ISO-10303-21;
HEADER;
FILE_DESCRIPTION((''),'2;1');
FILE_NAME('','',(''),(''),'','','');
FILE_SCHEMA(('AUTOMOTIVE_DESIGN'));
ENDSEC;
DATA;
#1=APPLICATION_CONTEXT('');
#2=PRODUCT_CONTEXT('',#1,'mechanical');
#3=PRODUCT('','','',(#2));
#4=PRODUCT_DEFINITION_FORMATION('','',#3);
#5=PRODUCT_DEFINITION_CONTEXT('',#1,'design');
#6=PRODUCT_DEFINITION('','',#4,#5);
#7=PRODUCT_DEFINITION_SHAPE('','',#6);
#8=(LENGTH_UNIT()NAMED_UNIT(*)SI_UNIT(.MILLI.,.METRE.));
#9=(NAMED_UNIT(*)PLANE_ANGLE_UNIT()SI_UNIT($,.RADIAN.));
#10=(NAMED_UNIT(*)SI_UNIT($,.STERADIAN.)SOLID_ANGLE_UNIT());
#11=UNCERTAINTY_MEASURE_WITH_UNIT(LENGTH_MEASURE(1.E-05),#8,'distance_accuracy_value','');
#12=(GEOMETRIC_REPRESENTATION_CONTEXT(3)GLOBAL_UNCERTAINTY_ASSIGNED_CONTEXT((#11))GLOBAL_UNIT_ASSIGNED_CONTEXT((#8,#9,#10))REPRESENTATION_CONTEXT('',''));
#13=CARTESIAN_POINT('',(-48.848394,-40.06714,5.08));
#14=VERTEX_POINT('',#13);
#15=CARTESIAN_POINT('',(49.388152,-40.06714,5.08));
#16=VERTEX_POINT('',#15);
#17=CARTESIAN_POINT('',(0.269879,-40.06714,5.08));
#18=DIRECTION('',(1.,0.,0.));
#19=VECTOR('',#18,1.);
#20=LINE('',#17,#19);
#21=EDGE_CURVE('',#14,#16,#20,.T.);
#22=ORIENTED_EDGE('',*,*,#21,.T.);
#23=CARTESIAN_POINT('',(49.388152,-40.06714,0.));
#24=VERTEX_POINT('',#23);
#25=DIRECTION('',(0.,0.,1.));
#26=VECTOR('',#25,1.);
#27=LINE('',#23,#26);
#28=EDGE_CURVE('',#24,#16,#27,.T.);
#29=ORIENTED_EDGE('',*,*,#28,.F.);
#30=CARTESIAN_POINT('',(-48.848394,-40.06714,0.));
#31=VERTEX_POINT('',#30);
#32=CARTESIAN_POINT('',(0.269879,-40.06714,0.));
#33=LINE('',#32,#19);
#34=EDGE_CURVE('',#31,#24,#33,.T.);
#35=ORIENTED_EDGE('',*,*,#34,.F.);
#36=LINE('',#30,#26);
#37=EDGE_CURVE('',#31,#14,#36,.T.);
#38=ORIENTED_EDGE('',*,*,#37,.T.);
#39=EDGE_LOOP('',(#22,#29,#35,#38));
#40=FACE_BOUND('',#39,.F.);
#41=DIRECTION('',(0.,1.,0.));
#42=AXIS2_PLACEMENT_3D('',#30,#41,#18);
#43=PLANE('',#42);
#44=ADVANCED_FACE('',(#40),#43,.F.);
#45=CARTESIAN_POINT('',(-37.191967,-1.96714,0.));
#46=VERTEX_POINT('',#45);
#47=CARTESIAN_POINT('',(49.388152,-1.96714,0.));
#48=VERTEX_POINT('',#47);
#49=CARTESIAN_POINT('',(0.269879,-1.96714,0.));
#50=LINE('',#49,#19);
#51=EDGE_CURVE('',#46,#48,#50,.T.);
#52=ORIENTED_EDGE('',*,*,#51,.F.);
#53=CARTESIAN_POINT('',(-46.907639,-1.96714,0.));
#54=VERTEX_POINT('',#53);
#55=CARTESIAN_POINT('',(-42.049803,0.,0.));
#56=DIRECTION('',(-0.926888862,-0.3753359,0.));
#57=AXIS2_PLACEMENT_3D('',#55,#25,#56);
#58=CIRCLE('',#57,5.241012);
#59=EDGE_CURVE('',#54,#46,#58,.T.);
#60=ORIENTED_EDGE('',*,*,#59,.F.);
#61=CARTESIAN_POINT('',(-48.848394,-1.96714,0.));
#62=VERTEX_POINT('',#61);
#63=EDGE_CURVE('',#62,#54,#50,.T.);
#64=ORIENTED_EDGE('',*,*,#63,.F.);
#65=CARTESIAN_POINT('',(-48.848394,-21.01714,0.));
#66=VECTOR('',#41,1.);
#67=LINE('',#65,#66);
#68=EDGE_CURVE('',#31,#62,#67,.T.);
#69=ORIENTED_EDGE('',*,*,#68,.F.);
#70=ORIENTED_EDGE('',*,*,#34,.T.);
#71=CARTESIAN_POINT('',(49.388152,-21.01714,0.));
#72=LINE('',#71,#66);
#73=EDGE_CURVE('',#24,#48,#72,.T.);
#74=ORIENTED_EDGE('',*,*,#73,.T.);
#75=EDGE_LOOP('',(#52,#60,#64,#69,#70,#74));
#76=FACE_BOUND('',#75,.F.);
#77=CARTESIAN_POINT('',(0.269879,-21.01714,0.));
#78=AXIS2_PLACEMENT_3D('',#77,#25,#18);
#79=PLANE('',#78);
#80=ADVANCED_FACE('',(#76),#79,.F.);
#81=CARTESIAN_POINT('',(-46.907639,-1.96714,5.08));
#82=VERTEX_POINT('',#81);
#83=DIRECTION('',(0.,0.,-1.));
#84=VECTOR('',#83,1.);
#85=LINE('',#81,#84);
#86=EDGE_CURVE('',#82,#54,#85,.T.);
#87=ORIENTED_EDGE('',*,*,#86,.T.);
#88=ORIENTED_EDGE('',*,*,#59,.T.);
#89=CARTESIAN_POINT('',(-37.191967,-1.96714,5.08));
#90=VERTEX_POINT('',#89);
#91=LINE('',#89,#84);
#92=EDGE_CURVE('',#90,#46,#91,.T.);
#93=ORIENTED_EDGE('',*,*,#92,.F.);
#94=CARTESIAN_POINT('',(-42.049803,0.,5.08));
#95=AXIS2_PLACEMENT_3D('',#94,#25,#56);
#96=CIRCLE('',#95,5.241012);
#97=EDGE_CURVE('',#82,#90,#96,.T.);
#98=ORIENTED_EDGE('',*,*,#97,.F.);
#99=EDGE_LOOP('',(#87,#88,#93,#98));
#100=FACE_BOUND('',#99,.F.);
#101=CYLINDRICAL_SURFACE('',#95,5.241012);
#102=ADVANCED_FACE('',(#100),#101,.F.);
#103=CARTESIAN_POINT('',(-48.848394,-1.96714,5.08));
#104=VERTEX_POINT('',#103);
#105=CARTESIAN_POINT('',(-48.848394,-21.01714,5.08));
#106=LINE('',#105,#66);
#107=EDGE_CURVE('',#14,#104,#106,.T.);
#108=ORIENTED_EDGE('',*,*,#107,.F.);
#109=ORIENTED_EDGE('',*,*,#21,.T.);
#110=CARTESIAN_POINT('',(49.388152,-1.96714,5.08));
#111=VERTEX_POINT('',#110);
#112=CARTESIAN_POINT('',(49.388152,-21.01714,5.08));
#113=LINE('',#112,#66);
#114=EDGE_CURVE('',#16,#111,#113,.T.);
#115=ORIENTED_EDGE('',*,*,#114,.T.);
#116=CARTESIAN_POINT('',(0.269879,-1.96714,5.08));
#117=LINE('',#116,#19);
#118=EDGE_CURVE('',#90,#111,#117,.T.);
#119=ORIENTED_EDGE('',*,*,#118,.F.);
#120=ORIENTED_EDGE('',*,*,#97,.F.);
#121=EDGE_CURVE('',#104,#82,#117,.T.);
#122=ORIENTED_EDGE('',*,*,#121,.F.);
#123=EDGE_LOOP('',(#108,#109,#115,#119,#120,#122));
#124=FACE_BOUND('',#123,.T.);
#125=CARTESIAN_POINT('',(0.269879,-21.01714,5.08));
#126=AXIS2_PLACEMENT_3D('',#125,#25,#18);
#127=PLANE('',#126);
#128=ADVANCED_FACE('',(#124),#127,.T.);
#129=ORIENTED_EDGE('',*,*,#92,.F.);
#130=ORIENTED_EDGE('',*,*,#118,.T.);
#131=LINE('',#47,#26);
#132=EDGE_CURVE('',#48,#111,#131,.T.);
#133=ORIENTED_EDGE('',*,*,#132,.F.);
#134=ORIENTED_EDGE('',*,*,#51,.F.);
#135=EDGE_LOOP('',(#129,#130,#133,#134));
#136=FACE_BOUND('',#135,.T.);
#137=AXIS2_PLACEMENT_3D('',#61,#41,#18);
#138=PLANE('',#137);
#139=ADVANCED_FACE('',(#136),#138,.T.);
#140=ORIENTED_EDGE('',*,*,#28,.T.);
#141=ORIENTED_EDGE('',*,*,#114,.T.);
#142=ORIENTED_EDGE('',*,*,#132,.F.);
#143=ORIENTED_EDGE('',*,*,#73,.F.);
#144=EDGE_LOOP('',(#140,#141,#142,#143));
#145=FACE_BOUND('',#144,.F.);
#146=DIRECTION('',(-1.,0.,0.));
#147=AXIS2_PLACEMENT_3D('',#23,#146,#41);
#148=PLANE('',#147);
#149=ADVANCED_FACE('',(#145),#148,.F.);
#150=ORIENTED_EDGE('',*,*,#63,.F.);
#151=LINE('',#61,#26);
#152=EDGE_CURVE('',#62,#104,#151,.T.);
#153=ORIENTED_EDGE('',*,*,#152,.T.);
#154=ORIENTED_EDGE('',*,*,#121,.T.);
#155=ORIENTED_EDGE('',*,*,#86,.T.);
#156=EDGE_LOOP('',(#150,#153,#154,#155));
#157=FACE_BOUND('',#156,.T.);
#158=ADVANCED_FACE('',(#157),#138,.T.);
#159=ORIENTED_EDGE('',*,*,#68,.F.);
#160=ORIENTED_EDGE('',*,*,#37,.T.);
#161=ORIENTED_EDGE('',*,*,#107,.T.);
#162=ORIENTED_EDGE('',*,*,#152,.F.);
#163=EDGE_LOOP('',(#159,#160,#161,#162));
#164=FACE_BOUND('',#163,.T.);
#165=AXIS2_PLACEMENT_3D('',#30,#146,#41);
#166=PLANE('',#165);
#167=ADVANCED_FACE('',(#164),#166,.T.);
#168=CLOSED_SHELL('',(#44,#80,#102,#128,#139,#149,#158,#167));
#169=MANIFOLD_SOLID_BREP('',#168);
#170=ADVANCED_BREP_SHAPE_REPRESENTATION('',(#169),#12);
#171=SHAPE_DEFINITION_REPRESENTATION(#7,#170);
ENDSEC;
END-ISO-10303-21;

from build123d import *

# Parameters (mm, degrees)
F0_W     = 98.2365459204
F0_H     = 38.1
F1_DEPTH = 5.08
F3_DEPTH = 25.4


# Not quite as in the source:
# - a feature names something its author has since deleted; it is built from what else it names


with BuildPart() as f1:
    # F0 (on Top) → F1 (new body)
    with BuildSketch(Plane.XY):
        with Locations((0.2698786557, -21.017140013)):
            Rectangle(F0_W, F0_H)
    extrude(amount=F1_DEPTH)

    # F2 (on face) → F3 (cut)
    with BuildSketch(Plane.XY.offset(5.08)):
        with BuildLine():
            Line((-37.191967051, -1.967140013), (-46.9076386285, -1.967140013))
            ThreePointArc((-46.9076386285, -1.967140013), (-42.0498028398, -5.2410121524), (-37.191967051, -1.967140013))
        make_face()
        with BuildLine():
            ThreePointArc((-37.191967051, -1.967140013), (-36.9054766067, -1.0020558812), (-36.8087906874, 0))
            ThreePointArc((-36.8087906874, 0), (-43.051858721, 5.1443262331), (-46.9076386285, -1.967140013))
            Line((-46.9076386285, -1.967140013), (-37.191967051, -1.967140013))
        make_face()
    extrude(amount=-F3_DEPTH, mode=Mode.SUBTRACT)


solid = f1.part
